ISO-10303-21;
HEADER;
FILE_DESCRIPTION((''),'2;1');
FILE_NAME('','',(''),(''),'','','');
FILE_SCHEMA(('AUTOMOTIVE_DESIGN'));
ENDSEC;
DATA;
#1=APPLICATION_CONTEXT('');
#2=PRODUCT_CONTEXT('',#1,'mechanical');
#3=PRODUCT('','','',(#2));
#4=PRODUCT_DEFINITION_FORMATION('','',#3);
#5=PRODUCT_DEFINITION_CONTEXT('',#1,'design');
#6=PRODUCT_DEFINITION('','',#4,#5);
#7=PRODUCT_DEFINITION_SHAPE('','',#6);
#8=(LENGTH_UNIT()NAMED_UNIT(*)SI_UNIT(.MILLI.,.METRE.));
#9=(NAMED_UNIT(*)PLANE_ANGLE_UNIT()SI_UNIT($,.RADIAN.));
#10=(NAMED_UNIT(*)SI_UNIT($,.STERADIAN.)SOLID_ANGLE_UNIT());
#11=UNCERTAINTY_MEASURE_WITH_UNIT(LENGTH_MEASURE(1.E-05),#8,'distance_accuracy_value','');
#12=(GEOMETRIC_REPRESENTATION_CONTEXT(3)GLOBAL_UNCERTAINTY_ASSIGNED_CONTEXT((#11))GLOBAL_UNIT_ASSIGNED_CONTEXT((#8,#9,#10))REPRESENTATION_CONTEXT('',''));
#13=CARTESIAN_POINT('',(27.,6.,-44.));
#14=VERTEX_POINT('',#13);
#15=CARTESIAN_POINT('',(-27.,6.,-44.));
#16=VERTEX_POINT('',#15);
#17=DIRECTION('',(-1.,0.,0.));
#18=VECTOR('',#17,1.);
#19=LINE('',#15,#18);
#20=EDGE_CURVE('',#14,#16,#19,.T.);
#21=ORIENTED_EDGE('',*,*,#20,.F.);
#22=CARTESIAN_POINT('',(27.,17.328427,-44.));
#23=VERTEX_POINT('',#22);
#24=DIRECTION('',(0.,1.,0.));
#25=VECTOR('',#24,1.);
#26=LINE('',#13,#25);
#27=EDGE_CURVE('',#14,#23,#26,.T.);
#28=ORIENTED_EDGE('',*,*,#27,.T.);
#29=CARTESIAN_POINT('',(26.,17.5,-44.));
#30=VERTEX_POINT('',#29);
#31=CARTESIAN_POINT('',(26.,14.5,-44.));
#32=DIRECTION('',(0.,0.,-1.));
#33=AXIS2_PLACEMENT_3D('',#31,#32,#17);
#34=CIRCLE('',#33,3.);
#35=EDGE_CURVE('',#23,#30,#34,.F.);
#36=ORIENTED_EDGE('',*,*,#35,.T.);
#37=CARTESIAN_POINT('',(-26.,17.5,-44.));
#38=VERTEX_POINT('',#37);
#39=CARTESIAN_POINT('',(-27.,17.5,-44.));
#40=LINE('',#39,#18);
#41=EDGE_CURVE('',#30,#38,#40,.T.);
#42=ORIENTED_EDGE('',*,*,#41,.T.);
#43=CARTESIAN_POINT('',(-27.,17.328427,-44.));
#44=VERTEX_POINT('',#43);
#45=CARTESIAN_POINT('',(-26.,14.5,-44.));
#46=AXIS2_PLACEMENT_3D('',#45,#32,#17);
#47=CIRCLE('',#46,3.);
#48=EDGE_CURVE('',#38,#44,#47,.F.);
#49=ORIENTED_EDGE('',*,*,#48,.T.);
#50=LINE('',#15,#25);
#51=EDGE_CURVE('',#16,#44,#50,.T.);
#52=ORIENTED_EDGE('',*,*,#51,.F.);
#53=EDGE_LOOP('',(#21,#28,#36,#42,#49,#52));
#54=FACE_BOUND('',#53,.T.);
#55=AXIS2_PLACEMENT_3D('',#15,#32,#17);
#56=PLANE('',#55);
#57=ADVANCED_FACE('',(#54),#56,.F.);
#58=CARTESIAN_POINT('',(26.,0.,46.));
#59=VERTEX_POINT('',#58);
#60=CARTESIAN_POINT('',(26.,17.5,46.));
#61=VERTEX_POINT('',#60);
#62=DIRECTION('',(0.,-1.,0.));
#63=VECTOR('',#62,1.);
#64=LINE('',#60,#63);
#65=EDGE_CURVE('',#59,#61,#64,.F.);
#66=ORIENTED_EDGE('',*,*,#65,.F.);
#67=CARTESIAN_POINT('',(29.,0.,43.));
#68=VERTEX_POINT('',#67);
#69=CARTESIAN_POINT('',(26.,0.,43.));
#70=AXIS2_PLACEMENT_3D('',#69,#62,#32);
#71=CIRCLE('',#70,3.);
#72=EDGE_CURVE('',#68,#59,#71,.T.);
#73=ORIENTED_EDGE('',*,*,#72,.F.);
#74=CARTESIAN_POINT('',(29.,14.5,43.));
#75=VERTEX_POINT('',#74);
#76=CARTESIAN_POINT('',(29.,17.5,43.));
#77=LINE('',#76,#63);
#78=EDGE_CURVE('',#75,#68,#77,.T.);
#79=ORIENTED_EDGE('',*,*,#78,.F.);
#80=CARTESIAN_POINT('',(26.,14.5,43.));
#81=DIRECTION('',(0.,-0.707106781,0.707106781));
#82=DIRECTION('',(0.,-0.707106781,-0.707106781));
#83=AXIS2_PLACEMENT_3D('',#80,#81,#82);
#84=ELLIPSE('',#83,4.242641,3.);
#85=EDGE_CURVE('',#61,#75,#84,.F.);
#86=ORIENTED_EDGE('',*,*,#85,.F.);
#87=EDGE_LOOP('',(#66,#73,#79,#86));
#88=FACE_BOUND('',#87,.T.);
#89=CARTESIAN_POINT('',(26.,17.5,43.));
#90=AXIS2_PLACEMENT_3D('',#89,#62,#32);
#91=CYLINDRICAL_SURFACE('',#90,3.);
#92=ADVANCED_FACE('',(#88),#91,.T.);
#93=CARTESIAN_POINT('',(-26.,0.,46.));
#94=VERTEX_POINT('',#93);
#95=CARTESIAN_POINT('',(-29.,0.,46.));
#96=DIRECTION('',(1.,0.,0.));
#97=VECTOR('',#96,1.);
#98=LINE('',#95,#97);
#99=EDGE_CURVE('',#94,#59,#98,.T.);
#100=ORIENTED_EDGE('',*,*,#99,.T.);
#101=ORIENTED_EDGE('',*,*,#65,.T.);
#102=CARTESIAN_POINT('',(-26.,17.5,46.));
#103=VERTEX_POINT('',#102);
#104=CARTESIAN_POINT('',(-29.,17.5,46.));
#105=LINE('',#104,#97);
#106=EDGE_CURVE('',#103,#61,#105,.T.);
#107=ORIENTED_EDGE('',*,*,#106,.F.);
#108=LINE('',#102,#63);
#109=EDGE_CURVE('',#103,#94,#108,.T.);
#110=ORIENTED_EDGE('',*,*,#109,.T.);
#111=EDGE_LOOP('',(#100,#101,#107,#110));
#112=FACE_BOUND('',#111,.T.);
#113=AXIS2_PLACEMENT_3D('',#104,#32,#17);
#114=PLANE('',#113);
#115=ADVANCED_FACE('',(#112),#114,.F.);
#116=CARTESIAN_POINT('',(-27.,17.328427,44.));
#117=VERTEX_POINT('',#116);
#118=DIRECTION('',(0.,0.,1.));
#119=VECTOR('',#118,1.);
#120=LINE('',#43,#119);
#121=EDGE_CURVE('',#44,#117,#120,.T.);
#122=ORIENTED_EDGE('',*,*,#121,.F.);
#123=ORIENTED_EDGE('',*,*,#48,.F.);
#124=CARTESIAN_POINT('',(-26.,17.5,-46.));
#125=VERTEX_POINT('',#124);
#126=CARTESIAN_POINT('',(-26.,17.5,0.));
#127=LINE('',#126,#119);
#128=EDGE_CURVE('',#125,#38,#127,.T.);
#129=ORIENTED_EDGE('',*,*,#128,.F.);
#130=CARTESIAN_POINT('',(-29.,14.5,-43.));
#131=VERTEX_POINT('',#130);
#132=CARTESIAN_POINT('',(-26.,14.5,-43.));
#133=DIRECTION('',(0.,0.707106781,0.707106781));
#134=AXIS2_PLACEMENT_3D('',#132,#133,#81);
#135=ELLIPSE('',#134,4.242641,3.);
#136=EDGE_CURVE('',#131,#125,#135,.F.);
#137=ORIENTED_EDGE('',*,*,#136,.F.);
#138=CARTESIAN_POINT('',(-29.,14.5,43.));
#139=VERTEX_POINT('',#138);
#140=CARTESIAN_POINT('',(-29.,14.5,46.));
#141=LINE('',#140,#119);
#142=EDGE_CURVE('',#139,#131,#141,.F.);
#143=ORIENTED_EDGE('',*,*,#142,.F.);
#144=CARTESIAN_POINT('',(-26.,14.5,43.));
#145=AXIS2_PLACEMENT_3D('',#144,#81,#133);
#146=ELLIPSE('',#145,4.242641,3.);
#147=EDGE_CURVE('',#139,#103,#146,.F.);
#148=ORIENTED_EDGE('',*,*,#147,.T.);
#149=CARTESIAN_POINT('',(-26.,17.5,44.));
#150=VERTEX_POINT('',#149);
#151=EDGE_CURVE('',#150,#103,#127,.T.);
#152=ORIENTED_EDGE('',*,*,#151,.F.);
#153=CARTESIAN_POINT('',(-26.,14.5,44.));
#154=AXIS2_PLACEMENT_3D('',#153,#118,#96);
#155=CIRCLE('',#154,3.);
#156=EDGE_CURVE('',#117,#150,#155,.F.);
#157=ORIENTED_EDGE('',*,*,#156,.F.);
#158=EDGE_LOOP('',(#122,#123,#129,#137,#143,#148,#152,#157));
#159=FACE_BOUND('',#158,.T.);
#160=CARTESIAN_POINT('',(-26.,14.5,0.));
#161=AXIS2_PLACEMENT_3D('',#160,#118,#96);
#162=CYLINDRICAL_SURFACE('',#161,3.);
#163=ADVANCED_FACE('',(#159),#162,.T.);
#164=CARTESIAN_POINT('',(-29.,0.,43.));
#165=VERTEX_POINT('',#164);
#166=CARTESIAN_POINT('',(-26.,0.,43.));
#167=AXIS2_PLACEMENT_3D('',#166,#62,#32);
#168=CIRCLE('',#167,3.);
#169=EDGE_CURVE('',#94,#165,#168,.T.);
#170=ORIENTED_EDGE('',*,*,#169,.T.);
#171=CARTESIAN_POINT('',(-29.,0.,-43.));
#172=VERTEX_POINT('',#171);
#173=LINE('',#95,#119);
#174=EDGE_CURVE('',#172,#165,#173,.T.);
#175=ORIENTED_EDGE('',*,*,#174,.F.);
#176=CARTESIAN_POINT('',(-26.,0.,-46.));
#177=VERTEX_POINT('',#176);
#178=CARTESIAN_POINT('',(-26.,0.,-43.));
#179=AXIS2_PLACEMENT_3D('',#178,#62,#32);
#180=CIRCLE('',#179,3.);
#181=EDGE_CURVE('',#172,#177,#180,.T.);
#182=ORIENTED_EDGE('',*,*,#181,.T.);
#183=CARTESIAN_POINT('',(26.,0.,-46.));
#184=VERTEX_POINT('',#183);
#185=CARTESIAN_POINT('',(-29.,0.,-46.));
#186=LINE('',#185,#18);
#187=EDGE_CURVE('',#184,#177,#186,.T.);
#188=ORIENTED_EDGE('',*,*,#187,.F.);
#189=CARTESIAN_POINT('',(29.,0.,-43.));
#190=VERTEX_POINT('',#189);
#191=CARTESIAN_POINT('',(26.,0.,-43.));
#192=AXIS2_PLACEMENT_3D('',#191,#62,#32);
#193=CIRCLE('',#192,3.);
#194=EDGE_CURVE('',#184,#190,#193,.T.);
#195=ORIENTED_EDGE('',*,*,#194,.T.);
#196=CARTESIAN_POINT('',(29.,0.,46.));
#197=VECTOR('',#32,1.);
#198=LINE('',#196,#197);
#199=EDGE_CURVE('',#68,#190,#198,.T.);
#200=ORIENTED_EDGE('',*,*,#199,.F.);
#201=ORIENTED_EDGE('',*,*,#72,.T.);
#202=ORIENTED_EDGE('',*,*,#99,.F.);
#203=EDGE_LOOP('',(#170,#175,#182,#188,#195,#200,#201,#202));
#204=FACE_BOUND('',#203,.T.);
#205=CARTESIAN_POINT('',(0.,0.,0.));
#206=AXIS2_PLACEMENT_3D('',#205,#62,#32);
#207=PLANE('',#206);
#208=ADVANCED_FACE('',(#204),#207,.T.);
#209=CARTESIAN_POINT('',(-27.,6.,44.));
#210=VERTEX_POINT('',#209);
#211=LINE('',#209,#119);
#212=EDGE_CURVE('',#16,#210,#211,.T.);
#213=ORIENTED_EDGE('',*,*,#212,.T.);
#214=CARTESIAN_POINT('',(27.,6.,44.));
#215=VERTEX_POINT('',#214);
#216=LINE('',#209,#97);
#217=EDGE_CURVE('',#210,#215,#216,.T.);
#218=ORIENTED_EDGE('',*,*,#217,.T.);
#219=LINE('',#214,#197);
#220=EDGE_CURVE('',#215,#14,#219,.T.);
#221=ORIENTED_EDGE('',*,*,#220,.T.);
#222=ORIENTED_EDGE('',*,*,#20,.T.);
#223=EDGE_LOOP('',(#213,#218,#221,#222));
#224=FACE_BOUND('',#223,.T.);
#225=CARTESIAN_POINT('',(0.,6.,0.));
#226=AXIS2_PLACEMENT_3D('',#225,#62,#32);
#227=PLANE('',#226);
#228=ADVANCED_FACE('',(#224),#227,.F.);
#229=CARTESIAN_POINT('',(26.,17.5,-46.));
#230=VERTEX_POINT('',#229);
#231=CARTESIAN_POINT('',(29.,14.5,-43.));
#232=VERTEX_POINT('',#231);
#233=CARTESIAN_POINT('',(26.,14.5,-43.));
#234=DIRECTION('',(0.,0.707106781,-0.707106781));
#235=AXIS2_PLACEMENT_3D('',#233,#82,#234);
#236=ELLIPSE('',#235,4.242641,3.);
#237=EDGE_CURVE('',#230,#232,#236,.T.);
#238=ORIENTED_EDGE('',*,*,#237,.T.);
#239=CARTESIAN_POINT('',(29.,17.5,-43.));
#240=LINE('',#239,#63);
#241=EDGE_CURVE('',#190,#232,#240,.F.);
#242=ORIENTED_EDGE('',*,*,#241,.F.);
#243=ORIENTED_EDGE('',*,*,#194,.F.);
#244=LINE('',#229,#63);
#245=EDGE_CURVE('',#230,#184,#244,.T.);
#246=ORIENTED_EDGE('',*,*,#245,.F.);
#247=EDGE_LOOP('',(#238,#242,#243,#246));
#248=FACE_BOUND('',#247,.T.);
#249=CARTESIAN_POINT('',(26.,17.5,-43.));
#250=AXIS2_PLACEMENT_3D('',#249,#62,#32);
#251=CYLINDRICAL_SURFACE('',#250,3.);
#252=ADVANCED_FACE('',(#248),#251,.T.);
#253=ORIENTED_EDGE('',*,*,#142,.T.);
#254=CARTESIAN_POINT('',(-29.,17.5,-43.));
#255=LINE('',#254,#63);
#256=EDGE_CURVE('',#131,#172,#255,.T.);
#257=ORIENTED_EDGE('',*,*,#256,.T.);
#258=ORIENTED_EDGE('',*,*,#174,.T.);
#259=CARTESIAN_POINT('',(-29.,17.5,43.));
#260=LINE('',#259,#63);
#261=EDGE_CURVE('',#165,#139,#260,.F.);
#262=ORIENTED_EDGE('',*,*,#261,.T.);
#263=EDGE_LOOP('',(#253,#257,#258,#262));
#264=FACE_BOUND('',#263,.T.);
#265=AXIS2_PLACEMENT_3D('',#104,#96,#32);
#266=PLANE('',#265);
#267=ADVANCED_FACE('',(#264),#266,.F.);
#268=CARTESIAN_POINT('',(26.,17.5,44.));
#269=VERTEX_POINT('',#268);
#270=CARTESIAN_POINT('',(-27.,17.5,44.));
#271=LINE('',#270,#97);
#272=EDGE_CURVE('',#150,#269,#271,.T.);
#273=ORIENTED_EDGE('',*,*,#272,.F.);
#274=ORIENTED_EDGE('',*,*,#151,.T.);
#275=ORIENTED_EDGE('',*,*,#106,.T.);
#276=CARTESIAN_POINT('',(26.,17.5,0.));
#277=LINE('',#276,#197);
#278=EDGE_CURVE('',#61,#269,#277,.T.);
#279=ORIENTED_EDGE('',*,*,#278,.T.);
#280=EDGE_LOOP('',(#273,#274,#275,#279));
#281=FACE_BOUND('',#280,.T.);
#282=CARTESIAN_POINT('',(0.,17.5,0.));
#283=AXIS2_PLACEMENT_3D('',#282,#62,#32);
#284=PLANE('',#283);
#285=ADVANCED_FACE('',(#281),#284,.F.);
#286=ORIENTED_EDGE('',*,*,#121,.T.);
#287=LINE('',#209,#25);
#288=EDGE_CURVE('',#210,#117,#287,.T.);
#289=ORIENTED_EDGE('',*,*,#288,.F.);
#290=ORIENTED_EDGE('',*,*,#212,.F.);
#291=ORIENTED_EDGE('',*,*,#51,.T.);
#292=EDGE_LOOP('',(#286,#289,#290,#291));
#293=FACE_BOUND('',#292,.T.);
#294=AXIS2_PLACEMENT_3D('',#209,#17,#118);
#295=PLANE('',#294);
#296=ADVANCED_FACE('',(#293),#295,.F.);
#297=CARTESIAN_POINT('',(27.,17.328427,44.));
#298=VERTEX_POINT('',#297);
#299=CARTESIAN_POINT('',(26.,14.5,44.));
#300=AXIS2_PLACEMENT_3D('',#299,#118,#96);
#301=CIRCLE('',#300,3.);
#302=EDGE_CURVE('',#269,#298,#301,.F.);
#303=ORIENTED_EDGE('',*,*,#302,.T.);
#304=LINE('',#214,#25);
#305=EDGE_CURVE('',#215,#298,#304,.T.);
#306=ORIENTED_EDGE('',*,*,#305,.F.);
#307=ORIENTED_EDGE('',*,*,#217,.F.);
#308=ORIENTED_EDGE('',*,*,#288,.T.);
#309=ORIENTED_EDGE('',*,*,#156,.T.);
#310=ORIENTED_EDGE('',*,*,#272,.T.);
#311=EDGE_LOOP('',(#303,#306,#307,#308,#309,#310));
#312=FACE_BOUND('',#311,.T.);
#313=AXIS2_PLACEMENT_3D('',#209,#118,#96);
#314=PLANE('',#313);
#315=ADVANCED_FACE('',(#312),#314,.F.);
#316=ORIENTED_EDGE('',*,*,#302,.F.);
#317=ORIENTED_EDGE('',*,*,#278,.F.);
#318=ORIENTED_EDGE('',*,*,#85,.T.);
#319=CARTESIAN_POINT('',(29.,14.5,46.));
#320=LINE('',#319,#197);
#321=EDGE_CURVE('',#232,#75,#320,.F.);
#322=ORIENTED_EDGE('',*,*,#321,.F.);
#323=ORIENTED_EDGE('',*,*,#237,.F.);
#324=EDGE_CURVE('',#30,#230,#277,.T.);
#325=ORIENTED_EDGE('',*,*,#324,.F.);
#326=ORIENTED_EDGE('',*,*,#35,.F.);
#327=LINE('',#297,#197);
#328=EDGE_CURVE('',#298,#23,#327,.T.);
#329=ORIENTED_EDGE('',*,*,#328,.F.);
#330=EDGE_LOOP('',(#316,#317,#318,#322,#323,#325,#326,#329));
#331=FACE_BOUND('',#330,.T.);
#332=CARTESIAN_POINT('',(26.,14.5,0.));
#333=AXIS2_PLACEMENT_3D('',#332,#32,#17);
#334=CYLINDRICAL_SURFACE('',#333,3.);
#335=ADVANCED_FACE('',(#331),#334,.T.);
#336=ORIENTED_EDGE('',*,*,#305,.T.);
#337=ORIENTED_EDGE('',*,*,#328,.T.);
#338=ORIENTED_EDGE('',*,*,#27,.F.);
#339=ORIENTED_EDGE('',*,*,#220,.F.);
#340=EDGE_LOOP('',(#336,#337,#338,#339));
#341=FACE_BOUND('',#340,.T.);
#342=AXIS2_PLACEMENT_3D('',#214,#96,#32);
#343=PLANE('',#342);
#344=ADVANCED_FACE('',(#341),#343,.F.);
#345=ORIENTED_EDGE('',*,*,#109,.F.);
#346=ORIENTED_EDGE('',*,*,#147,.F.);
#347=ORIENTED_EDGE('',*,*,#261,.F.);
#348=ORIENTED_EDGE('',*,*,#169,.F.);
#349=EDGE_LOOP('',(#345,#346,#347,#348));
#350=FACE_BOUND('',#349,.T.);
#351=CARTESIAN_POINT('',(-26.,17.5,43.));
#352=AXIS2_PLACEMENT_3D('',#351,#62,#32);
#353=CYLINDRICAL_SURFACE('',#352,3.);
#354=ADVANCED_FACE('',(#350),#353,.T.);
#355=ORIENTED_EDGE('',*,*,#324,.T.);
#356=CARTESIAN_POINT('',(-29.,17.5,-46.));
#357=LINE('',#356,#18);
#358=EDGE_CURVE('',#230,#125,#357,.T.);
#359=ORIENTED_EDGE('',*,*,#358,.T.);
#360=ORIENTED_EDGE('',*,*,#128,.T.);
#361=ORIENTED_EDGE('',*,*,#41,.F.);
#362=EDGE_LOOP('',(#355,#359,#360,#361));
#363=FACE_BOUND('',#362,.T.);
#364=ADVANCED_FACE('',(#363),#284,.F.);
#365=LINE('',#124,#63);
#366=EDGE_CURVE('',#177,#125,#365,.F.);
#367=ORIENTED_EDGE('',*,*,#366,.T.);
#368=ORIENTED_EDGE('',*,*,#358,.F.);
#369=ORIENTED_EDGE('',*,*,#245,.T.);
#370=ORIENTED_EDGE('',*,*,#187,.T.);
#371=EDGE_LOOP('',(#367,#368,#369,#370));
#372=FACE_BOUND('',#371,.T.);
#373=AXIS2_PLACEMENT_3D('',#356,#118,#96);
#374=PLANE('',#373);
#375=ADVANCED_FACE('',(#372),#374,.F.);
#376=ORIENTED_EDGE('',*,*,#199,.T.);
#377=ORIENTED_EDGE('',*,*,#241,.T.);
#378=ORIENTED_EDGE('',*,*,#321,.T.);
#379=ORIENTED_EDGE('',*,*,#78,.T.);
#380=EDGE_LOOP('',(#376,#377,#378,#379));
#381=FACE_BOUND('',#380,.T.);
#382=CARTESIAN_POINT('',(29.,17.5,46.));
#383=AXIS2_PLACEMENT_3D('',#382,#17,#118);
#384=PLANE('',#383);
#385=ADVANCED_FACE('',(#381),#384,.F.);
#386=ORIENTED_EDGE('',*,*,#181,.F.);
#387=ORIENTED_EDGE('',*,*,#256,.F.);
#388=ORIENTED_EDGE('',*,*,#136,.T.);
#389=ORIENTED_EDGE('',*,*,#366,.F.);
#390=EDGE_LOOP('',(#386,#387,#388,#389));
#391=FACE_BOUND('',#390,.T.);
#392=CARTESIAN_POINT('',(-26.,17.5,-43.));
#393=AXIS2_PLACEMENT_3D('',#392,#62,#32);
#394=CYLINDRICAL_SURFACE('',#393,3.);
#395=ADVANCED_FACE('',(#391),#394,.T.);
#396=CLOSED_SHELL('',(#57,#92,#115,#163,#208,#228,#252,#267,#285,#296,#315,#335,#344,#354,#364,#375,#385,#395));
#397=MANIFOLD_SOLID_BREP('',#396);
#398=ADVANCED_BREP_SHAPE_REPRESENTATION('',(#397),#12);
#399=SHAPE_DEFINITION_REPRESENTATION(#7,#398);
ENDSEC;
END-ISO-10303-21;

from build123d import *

# Parameters (mm, degrees)
SKETCH1_W           = 58
SKETCH1_H           = 92
BOSS_EXTRUDE1_DEPTH = 17.5
SKETCH2_W           = 54
SKETCH2_H           = 88
CUT_EXTRUDE1_DEPTH  = 11.5
FILLET3_R           = 3


with BuildPart() as part:
    # Sketch1 → Boss-Extrude1 (new body)
    with BuildSketch(Plane(origin=(0, 0, 0), x_dir=(1, 0, 0), z_dir=(0, 1, 0))):
        Rectangle(SKETCH1_W, SKETCH1_H)
    extrude(amount=BOSS_EXTRUDE1_DEPTH)

    # Sketch2 → Cut-Extrude1 (cut)
    with BuildSketch(Plane(origin=(0, 17.5, 0), x_dir=(1, 0, 0), z_dir=(0, 1, 0))):
        Rectangle(SKETCH2_W, SKETCH2_H)
    extrude(amount=-CUT_EXTRUDE1_DEPTH, mode=Mode.SUBTRACT)

    # Fillet3
    # the kernel refuses this fillet: 3 mm, written as the material it takes off along each edge
    with BuildSketch(Plane(origin=(29, -7.5, -46), x_dir=(0, 0, 1), z_dir=(0, 1, 0)), Plane(origin=(29, -7.5, 46), x_dir=(-1, 0, 0), z_dir=(0, 1, 0))) as fillet3_piece_1:
        with BuildLine():
            CenterArc((FILLET3_R, -FILLET3_R), FILLET3_R, 90, 90)
            Line((0, -FILLET3_R), (0, 0))
            Line((0, 0), (FILLET3_R, 0))
        make_face()
    extrude(amount=32.5, mode=Mode.SUBTRACT)
    with BuildSketch(Plane(origin=(29, 17.5, 53.5), x_dir=(0, -1, 0), z_dir=(0, 0, -1)), Plane(origin=(-29, 17.5, -53.5), x_dir=(0, -1, 0), z_dir=(0, 0, 1))) as fillet3_piece_2:
        with BuildLine():
            CenterArc((FILLET3_R, FILLET3_R), FILLET3_R, 180, 90)
            Line((0, FILLET3_R), (0, 0))
            Line((0, 0), (FILLET3_R, 0))
        make_face()
    extrude(amount=107, mode=Mode.SUBTRACT)
    with BuildSketch(Plane(origin=(-29, -7.5, -46), x_dir=(0, 0, 1), z_dir=(0, 1, 0)), Plane(origin=(-29, -7.5, 46), x_dir=(1, 0, 0), z_dir=(0, 1, 0))) as fillet3_piece_3:
        with BuildLine():
            CenterArc((FILLET3_R, FILLET3_R), FILLET3_R, 180, 90)
            Line((0, FILLET3_R), (0, 0))
            Line((0, 0), (FILLET3_R, 0))
        make_face()
    extrude(amount=32.5, mode=Mode.SUBTRACT)


solid = part.part
